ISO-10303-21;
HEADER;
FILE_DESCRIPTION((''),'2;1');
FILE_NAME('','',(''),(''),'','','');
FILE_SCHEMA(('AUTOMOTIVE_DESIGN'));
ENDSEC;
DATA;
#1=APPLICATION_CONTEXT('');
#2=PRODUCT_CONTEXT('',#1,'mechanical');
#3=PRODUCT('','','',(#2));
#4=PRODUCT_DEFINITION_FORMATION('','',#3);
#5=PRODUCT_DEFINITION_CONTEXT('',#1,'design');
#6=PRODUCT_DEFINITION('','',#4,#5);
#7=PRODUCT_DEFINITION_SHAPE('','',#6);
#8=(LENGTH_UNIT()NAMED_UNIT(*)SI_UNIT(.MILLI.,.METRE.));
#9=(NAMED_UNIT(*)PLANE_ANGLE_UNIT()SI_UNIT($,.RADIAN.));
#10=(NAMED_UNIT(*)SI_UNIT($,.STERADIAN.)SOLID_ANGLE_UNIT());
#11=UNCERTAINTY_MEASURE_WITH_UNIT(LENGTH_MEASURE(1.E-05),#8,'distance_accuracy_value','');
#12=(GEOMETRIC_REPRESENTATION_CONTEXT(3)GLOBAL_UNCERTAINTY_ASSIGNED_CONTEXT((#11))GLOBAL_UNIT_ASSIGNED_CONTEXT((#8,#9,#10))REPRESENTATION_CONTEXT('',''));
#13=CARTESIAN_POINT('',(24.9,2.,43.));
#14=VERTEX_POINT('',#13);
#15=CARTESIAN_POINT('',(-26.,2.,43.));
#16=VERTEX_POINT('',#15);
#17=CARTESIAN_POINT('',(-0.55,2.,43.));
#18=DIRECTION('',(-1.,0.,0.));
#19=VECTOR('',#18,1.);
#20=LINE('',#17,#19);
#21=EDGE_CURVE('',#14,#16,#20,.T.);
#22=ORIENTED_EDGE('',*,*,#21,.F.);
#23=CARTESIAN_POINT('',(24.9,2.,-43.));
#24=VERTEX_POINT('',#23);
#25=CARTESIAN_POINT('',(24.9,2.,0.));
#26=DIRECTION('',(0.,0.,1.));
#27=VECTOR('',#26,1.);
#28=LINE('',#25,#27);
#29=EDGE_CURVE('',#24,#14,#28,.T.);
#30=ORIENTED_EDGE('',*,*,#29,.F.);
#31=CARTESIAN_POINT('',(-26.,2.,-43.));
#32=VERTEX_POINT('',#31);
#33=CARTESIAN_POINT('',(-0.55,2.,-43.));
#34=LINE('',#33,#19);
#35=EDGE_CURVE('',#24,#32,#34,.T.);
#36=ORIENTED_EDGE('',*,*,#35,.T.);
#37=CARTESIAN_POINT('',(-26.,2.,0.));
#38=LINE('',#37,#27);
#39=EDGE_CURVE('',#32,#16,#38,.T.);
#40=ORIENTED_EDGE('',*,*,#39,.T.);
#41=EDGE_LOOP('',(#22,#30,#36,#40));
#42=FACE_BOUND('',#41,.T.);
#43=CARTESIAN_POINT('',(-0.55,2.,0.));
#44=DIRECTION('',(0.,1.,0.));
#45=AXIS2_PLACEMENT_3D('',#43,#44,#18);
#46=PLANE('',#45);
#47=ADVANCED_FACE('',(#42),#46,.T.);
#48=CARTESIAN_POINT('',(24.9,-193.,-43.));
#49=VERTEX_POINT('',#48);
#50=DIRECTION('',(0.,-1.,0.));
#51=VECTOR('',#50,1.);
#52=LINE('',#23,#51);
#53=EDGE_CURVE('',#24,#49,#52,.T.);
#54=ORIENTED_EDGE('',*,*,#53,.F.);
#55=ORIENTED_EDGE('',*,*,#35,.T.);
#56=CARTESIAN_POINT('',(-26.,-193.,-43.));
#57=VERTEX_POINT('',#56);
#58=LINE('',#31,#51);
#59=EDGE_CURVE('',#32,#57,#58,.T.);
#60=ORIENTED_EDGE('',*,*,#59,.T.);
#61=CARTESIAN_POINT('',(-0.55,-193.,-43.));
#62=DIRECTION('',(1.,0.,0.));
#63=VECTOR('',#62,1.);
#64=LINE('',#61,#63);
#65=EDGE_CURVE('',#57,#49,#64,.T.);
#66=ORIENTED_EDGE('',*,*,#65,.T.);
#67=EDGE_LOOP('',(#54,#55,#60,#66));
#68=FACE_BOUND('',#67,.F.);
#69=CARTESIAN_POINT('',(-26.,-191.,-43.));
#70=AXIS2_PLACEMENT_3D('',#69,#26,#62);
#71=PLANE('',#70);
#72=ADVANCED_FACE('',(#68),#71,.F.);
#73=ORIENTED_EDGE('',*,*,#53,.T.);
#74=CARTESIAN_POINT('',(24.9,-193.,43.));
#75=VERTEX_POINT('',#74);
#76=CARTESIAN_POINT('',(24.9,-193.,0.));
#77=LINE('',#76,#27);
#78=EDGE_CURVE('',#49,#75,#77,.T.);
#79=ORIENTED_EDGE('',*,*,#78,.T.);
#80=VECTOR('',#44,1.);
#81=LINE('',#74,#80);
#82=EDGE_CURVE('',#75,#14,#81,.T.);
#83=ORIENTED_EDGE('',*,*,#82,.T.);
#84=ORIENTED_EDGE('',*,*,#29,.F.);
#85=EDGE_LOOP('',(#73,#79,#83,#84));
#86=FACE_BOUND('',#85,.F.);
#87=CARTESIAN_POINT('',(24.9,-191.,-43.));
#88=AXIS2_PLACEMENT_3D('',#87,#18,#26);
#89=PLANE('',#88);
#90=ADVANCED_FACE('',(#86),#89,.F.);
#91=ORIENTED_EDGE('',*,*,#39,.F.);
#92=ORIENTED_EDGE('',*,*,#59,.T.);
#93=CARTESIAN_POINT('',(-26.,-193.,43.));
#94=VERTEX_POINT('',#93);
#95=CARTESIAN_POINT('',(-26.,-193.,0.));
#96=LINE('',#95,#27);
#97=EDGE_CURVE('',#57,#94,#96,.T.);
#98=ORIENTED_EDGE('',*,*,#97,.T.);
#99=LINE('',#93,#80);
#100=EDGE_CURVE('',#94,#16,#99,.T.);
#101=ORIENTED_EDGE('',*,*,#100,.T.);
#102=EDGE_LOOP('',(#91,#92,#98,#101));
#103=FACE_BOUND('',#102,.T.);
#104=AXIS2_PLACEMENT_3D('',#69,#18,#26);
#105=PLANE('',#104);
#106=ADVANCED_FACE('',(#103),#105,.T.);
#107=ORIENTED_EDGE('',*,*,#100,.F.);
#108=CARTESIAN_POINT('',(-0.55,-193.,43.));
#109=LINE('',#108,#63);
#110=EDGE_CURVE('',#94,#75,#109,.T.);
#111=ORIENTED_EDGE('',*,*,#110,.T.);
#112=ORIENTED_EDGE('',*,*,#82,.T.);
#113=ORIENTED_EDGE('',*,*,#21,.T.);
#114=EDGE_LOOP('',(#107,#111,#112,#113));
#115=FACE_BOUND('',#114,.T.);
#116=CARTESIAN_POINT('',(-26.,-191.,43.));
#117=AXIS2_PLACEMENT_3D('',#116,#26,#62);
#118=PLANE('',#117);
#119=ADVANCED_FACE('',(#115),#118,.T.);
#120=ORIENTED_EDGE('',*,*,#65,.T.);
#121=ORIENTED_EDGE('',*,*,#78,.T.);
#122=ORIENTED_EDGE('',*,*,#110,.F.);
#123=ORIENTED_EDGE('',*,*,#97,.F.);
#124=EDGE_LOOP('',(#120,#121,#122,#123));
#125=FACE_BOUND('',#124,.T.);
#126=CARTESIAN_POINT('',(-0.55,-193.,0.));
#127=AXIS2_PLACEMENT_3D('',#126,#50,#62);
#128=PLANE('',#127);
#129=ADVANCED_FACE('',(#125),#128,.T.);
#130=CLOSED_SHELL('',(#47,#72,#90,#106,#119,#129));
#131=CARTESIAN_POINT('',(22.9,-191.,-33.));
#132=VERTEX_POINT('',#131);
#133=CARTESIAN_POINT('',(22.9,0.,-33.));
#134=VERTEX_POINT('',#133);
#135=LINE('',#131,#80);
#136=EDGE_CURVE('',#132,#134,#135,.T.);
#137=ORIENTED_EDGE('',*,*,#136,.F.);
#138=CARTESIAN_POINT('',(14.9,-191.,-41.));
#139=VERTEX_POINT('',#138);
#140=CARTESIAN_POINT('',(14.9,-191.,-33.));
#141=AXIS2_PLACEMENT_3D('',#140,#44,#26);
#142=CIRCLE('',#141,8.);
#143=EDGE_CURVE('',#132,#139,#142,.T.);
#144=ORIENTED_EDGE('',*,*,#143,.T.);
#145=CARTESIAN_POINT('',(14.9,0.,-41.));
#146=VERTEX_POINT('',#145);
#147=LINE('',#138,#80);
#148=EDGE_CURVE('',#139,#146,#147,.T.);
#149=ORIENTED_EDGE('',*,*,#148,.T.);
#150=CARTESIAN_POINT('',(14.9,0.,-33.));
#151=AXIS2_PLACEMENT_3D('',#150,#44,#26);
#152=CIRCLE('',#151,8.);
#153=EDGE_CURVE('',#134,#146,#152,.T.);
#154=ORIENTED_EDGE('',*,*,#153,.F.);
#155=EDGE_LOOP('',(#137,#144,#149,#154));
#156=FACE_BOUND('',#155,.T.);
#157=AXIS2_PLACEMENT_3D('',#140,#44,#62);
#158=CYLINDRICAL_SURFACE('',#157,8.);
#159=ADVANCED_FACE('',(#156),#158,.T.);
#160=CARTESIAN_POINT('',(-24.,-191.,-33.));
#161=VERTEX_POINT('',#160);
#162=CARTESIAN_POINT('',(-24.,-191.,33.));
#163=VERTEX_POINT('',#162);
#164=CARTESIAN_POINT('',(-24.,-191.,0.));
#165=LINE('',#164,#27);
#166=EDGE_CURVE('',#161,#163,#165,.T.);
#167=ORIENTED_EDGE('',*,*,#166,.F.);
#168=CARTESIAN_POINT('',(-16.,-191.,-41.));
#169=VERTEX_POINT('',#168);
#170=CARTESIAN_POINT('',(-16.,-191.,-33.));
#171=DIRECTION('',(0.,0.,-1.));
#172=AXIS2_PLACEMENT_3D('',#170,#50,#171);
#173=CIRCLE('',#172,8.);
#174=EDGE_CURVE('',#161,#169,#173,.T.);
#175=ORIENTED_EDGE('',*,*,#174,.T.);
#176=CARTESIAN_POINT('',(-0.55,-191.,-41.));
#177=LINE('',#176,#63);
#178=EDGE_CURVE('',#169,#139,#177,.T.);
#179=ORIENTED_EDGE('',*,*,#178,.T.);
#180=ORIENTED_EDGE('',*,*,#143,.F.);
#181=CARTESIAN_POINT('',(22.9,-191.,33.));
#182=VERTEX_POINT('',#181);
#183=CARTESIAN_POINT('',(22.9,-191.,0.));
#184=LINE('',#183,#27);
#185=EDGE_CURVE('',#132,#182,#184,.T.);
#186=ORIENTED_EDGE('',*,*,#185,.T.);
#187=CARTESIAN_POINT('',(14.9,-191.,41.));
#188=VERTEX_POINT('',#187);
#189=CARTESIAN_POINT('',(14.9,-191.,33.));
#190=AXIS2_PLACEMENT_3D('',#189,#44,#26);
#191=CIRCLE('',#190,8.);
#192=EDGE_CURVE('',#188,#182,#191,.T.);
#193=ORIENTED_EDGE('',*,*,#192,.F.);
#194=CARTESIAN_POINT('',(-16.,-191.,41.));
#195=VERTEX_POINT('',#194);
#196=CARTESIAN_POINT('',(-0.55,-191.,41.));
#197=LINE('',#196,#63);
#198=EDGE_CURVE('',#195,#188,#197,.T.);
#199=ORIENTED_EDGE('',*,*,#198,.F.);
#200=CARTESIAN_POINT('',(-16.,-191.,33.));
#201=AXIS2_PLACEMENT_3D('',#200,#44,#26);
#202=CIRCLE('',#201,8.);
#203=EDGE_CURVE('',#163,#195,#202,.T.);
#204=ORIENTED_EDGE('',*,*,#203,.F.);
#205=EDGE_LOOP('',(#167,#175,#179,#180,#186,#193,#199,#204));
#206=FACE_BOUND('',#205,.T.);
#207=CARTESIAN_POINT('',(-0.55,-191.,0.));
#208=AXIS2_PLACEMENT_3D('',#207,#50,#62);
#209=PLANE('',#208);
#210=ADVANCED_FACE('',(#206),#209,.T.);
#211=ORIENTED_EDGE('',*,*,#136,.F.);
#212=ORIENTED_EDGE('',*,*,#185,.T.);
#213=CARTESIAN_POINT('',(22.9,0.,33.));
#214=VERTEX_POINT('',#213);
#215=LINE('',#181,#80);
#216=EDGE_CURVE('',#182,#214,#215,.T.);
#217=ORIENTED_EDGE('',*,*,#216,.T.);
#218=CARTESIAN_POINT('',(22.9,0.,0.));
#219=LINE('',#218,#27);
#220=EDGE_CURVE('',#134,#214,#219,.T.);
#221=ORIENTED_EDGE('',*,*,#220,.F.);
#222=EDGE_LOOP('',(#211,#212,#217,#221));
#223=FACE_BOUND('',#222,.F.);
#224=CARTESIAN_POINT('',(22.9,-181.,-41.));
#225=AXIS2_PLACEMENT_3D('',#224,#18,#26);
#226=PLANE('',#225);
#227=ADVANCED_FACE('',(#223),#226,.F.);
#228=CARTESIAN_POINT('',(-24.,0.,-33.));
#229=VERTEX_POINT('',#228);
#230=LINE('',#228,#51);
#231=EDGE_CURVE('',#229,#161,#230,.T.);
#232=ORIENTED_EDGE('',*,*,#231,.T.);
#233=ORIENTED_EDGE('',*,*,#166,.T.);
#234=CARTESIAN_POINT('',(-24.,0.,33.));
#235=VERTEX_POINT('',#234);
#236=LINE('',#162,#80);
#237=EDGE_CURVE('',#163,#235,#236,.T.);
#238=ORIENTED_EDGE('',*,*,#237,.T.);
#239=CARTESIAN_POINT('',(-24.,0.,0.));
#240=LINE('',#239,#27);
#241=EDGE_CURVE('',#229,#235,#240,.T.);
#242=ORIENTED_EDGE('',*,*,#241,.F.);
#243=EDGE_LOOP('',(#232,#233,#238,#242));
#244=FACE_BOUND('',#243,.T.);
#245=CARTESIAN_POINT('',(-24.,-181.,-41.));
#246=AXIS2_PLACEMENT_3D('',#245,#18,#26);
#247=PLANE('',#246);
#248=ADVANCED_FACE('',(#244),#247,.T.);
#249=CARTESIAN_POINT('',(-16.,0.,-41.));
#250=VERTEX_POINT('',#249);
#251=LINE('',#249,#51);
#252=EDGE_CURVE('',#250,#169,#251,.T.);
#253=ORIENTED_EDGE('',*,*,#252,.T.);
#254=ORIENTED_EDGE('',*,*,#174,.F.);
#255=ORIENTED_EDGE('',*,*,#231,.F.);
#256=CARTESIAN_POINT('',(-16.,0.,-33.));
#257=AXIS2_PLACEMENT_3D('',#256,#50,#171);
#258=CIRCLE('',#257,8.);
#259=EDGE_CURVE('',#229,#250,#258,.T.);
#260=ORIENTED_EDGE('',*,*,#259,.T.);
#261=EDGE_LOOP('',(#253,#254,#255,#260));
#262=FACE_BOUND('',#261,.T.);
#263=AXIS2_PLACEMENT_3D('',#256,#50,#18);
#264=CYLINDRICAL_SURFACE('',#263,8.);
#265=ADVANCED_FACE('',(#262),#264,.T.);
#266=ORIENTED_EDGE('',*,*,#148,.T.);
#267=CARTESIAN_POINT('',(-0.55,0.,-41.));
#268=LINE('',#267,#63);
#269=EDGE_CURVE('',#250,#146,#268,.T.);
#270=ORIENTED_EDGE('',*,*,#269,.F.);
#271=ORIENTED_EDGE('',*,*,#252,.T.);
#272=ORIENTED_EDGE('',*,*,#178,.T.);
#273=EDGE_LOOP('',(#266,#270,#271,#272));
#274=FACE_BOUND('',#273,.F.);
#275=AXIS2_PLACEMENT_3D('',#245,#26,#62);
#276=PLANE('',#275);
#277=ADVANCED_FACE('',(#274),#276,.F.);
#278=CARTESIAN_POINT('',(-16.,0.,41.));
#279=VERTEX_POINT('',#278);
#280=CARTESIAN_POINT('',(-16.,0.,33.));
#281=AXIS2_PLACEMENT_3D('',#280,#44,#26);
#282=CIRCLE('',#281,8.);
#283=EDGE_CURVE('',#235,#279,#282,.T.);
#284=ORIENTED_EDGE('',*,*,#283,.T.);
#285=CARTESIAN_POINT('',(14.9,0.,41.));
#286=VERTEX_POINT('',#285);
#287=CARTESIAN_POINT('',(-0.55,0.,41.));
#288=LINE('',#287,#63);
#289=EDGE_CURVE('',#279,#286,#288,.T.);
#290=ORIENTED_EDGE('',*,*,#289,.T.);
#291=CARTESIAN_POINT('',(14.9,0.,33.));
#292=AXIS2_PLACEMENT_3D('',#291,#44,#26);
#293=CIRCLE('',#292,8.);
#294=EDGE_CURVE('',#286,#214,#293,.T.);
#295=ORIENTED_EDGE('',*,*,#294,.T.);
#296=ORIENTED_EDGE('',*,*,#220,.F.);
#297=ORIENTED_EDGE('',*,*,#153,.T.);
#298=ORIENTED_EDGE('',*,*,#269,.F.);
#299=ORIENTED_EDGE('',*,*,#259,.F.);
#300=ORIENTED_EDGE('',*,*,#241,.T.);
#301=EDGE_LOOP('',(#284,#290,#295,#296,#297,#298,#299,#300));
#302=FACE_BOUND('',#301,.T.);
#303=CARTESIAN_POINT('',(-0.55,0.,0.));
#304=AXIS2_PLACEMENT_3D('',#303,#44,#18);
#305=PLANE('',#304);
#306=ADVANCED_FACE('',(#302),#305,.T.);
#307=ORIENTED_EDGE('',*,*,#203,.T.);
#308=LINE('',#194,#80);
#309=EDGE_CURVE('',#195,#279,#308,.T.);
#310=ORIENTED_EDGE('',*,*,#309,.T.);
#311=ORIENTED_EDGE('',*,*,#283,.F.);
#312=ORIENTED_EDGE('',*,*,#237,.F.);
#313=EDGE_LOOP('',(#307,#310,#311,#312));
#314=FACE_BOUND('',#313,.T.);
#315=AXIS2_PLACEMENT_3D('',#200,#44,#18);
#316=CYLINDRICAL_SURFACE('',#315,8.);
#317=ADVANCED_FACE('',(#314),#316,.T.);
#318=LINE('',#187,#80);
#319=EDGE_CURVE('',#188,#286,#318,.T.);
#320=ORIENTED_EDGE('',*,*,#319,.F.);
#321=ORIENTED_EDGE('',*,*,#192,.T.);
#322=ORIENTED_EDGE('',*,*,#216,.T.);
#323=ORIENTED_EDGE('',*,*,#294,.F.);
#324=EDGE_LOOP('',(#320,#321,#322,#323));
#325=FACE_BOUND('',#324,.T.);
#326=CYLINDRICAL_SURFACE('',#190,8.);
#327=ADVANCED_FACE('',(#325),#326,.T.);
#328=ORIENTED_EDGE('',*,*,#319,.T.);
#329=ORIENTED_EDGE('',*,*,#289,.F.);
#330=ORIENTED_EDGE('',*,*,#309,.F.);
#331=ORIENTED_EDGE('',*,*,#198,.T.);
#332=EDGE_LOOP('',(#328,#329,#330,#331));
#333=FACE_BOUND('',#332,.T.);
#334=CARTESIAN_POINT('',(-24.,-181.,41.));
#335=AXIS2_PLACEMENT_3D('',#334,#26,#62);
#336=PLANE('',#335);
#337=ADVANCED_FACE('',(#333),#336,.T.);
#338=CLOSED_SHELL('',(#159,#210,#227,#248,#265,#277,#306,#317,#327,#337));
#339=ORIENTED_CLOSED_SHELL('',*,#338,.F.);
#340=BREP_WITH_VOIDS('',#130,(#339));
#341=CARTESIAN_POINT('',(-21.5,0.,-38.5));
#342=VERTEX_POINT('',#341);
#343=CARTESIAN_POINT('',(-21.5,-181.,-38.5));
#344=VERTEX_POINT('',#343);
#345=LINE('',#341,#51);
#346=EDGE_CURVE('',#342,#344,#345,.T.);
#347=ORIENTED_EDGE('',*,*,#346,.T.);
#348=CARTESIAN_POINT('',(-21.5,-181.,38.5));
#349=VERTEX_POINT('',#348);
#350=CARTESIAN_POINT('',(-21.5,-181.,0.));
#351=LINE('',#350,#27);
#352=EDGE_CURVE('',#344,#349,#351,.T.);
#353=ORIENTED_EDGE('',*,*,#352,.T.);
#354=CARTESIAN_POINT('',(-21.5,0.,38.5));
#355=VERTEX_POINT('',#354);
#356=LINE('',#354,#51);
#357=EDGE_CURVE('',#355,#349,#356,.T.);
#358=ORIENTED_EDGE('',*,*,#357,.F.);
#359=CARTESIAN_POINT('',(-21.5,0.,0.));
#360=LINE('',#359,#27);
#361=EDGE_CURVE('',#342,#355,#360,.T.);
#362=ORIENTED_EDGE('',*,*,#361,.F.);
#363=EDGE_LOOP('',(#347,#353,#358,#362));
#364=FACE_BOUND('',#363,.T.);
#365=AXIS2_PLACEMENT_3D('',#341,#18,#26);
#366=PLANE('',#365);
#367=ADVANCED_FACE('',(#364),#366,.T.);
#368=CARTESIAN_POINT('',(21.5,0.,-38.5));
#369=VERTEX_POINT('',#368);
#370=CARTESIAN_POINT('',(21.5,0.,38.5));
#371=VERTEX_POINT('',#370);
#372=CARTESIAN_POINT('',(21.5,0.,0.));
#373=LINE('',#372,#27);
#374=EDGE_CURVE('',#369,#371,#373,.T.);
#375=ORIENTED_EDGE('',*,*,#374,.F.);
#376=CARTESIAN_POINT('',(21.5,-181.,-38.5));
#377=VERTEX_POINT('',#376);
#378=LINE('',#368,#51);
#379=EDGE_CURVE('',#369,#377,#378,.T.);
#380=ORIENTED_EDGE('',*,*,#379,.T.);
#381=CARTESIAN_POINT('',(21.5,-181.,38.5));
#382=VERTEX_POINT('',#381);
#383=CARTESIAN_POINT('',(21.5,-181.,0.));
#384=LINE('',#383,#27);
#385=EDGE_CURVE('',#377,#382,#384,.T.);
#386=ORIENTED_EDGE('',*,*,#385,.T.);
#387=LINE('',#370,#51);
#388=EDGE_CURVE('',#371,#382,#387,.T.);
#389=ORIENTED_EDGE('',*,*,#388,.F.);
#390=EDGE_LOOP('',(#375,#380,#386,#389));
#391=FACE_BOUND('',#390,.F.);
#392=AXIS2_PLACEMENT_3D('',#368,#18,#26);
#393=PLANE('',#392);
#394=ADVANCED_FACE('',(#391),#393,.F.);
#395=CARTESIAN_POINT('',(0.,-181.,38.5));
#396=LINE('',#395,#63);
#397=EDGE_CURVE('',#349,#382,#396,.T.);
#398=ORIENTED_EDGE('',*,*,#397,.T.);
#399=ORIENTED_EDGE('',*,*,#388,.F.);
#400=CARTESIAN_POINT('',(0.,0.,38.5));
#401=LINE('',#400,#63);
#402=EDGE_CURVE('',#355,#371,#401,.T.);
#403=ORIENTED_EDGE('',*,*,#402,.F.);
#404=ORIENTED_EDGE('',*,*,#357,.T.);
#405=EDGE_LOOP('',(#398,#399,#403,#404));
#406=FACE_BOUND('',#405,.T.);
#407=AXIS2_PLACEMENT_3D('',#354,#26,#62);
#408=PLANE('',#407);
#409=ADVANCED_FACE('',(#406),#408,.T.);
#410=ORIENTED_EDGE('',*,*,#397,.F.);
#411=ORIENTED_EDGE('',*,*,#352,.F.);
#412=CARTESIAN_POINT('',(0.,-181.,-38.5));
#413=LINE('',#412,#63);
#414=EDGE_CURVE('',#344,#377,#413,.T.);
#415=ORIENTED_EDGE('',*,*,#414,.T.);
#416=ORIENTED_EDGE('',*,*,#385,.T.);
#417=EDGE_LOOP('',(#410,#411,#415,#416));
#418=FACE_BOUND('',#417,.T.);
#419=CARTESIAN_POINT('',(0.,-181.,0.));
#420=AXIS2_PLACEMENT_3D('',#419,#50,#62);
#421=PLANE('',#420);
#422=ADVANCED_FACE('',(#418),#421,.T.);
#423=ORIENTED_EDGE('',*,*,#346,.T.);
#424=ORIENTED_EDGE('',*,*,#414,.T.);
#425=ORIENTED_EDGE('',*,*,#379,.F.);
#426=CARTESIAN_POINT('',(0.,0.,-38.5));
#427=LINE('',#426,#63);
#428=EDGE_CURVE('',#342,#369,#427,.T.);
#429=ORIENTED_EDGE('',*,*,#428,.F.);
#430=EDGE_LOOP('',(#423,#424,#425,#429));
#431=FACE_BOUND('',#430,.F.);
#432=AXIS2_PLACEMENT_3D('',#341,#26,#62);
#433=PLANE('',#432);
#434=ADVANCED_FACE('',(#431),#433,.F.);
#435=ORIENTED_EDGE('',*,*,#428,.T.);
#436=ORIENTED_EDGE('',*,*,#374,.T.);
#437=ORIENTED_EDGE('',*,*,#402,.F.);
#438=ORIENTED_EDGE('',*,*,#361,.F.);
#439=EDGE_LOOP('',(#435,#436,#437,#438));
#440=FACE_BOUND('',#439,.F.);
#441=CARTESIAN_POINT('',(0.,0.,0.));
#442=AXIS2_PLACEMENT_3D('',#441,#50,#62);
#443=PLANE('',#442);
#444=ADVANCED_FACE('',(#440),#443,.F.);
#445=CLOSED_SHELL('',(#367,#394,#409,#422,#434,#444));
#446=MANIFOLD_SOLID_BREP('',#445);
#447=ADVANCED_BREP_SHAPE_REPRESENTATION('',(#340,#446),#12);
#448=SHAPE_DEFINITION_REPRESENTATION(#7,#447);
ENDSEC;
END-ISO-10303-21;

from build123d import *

# Parameters (mm, degrees)
F0_W          = 43
F0_H          = 77
F1_DEPTH      = 181
F2_W          = 50.9000002146
F2_H          = 86
F2_W_2        = 46.9000002146
F2_H_2        = 82
F3_DEPTH      = 181
F3_DEPTH_BACK = 10
F4_R          = 8
F5_W          = 50.9000002146
F5_H          = 86
F6_DEPTH      = 2
F7_W          = 50.9000002146
F7_H          = 86
F8_DEPTH      = 2


# Not quite as in the source:
# - a feature names something its author has since deleted; it is built from what else it names


with BuildPart() as f1:
    # F0 (on Front) → F1 (new body)
    with BuildSketch(Plane.XZ):
        Rectangle(F0_W, F0_H)
    extrude(amount=F1_DEPTH)


with BuildPart() as f3:
    # F2 (on face) → F3 (new body, two sides)
    with BuildSketch(Plane.XZ.offset(181)) as f3_sk:
        with Locations((-0.5499998927, 0)):
            Rectangle(F2_W, F2_H)
        with Locations((-0.5499998927, 0)):
            Rectangle(F2_W_2, F2_H_2, mode=Mode.SUBTRACT)
    extrude(amount=-F3_DEPTH)
    extrude(f3_sk.sketch, amount=F3_DEPTH_BACK)

    # F4
    f4_edges = [f3.edges().sort_by_distance(p)[0] for p in [
        (-24, -95.5, 41),
        (22.9, -95.5, 41),
        (22.9, -95.5, -41),
        (-24, -95.5, -41),
    ]]
    fillet(f4_edges, radius=F4_R)

    # F5 (on face) → F6 (join)
    with BuildSketch(Plane(origin=(0, 0, 0), x_dir=(-1, 0, 0), z_dir=(0, 1, 0))):
        with Locations((0.5499998927, 0)):
            Rectangle(F5_W, F5_H)
    extrude(amount=F6_DEPTH)

    # F7 (on face) → F8 (join)
    with BuildSketch(Plane.XZ.offset(191)):
        with Locations((-0.5499998927, 0)):
            Rectangle(F7_W, F7_H)
    extrude(amount=F8_DEPTH)


solid = Compound([f1.part, f3.part])
